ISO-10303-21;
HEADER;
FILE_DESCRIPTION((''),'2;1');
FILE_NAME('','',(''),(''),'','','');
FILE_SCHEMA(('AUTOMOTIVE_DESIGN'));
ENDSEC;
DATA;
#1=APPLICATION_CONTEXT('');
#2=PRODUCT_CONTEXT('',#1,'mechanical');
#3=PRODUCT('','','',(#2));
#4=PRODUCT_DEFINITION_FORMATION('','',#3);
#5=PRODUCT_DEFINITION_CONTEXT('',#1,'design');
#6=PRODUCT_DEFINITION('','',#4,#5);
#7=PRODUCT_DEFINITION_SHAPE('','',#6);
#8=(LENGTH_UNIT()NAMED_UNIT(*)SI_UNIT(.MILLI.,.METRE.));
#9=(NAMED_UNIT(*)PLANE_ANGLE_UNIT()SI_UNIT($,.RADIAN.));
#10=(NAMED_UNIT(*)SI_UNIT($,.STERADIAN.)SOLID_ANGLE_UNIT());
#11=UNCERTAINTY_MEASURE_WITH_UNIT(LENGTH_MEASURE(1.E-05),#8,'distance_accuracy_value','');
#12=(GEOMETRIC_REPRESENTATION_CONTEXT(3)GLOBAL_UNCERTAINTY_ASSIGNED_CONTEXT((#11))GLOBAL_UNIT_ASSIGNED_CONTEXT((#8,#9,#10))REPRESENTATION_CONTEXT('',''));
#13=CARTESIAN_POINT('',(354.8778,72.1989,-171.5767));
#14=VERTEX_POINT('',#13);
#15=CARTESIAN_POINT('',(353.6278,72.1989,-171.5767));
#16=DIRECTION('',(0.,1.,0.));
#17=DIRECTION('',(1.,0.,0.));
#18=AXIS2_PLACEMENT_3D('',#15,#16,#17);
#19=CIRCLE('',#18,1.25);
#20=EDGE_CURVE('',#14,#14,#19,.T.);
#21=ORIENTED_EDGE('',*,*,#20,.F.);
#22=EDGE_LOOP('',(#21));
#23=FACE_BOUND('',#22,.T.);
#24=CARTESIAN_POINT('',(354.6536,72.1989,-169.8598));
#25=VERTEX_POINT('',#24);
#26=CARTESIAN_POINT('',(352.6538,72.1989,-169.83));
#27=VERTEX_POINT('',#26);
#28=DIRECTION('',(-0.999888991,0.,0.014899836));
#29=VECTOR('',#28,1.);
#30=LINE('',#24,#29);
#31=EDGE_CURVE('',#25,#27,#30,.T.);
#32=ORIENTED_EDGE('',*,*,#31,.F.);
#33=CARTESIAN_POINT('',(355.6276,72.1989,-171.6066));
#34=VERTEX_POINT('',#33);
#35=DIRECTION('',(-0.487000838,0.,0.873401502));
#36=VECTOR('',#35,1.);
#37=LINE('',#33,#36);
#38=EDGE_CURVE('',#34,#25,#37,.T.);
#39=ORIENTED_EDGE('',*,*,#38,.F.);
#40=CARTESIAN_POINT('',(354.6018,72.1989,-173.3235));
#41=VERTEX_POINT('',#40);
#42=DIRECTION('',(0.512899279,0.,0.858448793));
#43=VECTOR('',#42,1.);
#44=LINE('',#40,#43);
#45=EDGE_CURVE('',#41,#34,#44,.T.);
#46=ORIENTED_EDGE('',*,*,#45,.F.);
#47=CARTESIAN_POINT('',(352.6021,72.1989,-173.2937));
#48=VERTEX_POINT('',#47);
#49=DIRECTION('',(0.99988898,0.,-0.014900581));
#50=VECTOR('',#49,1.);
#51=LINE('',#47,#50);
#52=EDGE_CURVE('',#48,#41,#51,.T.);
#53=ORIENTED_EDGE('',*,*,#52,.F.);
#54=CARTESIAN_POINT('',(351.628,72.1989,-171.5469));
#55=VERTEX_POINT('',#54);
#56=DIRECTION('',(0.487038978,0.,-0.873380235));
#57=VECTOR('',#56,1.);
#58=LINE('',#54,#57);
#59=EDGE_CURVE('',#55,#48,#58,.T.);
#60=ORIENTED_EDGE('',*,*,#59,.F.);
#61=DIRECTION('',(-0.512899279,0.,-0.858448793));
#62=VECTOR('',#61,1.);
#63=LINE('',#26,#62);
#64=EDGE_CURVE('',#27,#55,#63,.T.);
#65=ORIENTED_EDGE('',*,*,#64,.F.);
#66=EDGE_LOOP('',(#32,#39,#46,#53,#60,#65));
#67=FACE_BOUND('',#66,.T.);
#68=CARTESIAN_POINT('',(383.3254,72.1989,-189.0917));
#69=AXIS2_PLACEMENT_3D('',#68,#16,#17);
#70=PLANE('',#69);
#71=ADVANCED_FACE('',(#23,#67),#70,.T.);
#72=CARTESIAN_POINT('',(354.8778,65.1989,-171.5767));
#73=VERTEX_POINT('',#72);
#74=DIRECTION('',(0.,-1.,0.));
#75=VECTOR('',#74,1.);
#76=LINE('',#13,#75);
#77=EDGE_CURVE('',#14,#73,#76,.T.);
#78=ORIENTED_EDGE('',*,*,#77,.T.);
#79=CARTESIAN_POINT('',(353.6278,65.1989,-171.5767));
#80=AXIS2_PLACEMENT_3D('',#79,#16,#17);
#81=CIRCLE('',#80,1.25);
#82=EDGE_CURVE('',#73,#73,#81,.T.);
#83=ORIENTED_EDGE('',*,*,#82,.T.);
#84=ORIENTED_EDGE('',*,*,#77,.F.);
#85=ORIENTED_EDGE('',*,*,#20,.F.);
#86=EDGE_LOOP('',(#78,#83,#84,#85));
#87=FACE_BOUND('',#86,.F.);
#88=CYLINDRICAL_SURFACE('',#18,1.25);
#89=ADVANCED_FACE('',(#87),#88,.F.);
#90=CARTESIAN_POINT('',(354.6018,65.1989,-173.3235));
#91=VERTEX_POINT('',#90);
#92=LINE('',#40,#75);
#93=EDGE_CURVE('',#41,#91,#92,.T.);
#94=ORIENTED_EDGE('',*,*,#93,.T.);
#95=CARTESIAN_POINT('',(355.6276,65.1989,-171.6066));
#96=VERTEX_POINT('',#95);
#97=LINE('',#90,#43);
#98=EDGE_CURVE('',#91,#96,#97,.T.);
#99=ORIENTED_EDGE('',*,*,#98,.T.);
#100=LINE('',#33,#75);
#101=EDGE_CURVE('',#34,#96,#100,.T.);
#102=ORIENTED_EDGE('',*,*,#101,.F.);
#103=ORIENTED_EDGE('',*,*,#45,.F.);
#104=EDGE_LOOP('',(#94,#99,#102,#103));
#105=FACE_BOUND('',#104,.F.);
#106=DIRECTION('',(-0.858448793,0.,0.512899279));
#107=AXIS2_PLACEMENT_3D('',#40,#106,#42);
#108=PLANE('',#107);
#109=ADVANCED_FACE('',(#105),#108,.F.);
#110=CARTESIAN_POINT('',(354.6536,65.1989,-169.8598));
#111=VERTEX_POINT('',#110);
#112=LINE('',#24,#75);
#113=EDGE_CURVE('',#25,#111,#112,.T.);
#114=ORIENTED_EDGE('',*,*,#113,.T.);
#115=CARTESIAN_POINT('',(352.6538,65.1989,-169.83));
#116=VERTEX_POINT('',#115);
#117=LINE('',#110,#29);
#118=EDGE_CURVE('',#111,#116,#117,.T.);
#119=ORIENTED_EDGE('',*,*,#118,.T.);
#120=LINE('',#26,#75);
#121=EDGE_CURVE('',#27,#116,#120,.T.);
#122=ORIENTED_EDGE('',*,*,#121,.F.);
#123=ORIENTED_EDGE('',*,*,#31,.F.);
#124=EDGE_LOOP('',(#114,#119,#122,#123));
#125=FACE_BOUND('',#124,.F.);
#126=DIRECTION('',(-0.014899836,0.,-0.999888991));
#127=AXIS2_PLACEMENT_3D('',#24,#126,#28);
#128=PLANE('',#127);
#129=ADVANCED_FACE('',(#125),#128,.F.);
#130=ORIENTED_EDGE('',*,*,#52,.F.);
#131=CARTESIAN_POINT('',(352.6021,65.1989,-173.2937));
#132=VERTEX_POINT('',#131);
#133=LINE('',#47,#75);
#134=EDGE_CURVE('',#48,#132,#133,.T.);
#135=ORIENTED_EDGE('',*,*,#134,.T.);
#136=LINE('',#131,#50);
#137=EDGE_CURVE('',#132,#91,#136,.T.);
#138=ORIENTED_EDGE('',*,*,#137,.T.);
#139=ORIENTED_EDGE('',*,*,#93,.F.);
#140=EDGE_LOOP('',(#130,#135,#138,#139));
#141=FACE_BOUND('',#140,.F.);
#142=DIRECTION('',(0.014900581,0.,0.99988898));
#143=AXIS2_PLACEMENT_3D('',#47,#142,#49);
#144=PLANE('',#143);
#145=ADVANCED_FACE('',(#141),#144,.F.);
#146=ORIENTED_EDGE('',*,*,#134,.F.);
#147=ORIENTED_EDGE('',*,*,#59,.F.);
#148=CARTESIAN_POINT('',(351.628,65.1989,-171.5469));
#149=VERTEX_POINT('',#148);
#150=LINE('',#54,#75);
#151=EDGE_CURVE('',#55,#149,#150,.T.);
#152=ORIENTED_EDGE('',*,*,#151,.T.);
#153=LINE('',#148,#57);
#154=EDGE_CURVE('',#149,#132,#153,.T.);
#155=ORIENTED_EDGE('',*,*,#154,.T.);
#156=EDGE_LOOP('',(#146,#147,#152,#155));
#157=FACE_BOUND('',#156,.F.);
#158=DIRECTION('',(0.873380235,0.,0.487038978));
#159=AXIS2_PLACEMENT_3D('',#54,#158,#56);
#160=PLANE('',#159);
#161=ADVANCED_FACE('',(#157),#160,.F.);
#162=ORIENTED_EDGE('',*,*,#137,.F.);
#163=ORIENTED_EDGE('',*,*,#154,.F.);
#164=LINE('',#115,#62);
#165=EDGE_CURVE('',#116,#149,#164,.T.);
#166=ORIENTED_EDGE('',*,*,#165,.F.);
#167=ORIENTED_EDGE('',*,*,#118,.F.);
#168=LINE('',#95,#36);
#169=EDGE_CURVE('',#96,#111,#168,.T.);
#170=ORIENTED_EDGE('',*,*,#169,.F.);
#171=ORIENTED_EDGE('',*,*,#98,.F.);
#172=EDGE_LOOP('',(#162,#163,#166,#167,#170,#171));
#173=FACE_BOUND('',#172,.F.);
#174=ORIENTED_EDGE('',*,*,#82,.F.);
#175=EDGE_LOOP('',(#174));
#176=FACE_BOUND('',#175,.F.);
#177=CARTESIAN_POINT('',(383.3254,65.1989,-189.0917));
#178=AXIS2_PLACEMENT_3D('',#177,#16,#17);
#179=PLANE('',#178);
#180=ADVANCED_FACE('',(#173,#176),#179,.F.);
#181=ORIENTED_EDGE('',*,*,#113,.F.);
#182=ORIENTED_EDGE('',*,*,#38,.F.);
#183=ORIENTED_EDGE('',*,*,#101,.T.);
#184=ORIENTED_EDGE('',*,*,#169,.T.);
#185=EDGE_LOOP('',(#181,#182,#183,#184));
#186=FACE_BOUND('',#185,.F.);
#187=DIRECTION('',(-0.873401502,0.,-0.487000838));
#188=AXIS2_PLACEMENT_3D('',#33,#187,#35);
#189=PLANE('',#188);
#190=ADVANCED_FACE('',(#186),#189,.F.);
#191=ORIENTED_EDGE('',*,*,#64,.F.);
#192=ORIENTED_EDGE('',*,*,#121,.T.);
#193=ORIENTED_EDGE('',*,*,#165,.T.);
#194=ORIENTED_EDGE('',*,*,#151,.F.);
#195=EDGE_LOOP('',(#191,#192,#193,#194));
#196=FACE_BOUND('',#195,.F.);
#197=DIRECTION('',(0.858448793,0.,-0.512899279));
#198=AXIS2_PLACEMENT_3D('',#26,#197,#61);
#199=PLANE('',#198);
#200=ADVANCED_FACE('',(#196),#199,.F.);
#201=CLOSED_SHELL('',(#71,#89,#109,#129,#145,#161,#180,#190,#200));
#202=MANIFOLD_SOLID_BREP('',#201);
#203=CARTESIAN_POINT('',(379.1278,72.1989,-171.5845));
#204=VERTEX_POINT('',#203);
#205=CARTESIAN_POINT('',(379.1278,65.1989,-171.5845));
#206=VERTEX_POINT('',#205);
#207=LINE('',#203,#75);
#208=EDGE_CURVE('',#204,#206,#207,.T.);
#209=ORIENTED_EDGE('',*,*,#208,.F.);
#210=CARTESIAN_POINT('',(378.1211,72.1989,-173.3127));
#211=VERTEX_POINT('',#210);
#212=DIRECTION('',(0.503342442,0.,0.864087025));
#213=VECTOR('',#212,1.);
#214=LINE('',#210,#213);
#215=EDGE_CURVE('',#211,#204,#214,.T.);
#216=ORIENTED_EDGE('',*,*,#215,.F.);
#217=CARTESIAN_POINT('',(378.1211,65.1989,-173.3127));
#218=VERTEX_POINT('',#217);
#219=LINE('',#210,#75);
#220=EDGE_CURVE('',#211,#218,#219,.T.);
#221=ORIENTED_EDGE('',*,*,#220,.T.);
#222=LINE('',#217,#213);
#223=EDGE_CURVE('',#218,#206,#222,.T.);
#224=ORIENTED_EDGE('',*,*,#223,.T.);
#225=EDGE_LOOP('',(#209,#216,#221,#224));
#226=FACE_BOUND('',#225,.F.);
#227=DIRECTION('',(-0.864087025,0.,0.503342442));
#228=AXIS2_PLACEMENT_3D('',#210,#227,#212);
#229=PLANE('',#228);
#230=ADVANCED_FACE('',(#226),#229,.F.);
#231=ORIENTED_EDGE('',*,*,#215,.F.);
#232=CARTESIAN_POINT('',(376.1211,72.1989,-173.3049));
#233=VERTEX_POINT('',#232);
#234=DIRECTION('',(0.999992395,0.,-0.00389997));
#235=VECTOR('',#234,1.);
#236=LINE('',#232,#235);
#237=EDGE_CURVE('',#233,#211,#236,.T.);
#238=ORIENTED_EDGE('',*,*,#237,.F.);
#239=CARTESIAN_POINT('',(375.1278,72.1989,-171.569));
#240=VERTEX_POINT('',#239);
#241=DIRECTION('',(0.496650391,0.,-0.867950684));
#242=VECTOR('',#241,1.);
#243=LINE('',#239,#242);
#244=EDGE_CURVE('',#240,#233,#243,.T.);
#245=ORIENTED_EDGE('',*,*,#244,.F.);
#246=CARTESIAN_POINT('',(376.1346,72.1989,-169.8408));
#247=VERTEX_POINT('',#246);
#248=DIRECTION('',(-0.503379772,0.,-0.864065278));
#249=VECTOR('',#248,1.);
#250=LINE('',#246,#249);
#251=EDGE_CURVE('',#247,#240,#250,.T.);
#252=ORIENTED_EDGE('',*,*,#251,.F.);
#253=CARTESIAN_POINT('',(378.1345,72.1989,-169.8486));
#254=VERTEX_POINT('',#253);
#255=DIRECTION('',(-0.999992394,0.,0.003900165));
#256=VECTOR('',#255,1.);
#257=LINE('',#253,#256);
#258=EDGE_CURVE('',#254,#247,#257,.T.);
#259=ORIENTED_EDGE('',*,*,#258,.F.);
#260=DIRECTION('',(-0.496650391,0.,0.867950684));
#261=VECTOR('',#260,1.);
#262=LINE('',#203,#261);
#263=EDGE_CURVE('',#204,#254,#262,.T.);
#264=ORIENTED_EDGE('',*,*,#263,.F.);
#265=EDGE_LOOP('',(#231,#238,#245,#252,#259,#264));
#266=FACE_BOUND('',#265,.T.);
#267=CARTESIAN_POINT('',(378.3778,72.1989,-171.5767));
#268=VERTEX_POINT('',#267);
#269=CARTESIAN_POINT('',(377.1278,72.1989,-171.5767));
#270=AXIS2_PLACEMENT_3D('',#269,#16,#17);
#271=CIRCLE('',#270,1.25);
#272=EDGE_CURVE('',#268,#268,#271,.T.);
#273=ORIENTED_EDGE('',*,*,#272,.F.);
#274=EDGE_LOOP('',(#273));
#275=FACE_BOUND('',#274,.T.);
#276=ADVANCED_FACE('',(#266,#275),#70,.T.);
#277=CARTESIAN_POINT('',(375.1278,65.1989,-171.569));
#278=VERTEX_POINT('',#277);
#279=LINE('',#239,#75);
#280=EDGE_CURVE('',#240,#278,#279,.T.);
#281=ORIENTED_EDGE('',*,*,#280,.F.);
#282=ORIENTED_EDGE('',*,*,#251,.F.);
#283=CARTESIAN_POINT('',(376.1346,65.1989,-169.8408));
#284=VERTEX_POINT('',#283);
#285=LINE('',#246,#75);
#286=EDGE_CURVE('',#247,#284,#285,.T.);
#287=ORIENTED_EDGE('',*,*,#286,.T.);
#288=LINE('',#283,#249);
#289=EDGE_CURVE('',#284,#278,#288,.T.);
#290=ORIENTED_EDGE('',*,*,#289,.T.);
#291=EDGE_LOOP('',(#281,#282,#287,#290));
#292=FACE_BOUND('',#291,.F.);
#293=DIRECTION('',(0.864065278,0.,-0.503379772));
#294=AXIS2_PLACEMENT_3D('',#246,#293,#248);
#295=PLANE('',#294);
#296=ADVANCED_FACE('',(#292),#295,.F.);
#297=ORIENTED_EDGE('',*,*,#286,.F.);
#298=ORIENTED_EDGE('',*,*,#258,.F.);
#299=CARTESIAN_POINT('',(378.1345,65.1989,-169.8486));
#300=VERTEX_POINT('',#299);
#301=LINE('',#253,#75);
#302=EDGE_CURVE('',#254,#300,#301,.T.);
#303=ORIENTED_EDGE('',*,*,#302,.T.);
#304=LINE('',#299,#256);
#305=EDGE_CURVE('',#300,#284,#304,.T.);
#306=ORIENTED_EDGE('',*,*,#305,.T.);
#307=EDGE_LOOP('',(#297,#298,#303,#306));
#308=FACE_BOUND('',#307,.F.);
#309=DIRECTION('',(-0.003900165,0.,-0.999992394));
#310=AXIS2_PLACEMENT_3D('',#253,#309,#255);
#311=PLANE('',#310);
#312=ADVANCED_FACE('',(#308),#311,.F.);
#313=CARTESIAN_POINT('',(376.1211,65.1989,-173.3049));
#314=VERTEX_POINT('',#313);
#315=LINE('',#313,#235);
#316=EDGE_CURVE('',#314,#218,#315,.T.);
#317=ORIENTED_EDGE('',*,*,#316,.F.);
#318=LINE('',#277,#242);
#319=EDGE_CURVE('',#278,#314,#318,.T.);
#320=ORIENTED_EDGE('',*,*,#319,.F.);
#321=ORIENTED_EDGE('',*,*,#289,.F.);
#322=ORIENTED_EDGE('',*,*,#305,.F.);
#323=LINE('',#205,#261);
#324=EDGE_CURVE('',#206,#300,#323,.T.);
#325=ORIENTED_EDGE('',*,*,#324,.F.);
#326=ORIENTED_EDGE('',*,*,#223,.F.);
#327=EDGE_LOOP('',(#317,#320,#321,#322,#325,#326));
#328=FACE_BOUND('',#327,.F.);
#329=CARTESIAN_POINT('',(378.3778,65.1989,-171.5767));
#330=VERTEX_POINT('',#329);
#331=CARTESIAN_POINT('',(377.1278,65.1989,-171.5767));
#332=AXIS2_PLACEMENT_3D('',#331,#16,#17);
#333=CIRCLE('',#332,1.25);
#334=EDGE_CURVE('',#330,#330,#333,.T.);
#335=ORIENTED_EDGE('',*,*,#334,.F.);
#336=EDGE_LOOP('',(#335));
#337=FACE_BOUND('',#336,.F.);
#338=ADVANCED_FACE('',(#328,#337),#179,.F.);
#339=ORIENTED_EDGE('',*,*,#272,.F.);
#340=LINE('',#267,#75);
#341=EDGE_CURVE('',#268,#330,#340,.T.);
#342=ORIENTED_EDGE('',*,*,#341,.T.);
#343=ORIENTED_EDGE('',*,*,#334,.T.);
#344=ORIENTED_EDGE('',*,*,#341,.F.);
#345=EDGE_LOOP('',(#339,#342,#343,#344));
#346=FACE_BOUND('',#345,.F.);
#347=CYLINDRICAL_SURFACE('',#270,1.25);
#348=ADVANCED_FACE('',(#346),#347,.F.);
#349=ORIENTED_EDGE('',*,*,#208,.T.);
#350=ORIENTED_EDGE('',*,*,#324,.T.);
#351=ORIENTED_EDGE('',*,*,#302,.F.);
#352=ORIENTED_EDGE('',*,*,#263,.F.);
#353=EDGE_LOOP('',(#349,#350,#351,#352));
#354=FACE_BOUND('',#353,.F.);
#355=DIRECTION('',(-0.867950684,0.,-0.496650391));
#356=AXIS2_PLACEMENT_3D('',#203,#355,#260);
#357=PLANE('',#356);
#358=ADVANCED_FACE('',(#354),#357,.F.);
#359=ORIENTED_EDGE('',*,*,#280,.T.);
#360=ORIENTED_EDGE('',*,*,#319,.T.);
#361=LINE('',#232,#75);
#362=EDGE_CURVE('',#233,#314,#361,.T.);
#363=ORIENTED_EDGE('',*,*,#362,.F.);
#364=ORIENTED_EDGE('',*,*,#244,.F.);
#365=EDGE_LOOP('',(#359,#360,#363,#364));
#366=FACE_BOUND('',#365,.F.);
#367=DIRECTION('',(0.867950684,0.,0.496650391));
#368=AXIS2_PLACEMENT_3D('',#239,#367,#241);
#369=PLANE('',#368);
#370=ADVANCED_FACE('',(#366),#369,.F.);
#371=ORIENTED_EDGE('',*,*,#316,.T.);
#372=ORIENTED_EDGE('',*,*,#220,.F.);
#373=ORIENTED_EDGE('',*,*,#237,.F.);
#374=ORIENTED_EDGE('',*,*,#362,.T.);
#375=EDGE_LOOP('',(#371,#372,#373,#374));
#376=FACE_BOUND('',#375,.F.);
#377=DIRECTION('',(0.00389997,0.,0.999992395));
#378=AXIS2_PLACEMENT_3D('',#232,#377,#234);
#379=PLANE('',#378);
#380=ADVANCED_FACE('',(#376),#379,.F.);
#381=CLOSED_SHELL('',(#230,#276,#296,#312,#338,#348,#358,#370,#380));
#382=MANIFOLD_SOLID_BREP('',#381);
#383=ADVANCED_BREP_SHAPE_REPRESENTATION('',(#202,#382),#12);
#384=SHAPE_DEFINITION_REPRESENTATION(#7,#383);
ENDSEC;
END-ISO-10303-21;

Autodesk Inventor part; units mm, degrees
ref_plane "YZ Plane" through (0, 0, 0) normal (1, 0, 0) x (0, 1, 0)
ref_plane "XZ Plane" through (0, 0, 0) normal (0, 1, 0) x (-1, 0, 0)
ref_plane "РабПлоскость1" through (383.3254, 72.1989, -189.0917) normal (0, 1, 0) x (1, 0, 0)
sketch "Эскиз1" plane through (383.3254, 72.1989, -189.0917) normal (0, 1, 0) x (1, 0, 0)
  circle A0 centre (-6.1976, -17.515) radius 1.3 projected
  circle A1 centre (-29.6976, -17.515) radius 1.3 projected
  circle A2 centre (-29.6976, 6.235) radius 1.3 projected
  circle A3 centre (-6.1976, -17.515) radius 2
  line L0 (-5.2043, -15.779) -> (-4.1976, -17.5072)
  line L1 (-4.1976, -17.5072) -> (-5.1909, -19.2431)
  line L2 (-5.1909, -19.2431) -> (-7.1908, -19.2509)
  line L3 (-7.1908, -19.2509) -> (-8.1976, -17.5227)
  line L4 (-8.1976, -17.5227) -> (-7.2043, -15.7868)
  line L5 (-7.2043, -15.7868) -> (-5.2043, -15.779)
  circle A4 centre (-29.6976, -17.515) radius 2
  line L6 (-28.7236, -15.7682) -> (-27.6978, -17.4851)
  line L7 (-27.6978, -17.4851) -> (-28.6718, -19.2319)
  line L8 (-28.6718, -19.2319) -> (-30.6716, -19.2617)
  line L9 (-30.6716, -19.2617) -> (-31.6974, -17.5448)
  line L10 (-31.6974, -17.5448) -> (-30.7233, -15.798)
  line L11 (-30.7233, -15.798) -> (-28.7236, -15.7682)
  circle A5 centre (-6.1976, -17.515) radius 1.25
  circle A6 centre (-29.6976, -17.515) radius 1.25
  point P0 (-383.3254, -189.0917)
  dimension "d0" = 4
  dimension "d1" = 4
  dimension "d5" = 2.5
  dimension "d6" = 2.5
ref_plane "РабПлоскость2" through (351.6278, 65.1989, -197.3267) normal (0, 1, 0) x (0, 0, 1)
extrude "Выдавливание1" add sketch "Эскиз1" against normal up to surface (7 mm away) contours A0 | A1 | L1 L2 L3 L4 L5 L0 | L7 L8 L9 L10 L11 L6
properties part number "стойка для дисплея"
